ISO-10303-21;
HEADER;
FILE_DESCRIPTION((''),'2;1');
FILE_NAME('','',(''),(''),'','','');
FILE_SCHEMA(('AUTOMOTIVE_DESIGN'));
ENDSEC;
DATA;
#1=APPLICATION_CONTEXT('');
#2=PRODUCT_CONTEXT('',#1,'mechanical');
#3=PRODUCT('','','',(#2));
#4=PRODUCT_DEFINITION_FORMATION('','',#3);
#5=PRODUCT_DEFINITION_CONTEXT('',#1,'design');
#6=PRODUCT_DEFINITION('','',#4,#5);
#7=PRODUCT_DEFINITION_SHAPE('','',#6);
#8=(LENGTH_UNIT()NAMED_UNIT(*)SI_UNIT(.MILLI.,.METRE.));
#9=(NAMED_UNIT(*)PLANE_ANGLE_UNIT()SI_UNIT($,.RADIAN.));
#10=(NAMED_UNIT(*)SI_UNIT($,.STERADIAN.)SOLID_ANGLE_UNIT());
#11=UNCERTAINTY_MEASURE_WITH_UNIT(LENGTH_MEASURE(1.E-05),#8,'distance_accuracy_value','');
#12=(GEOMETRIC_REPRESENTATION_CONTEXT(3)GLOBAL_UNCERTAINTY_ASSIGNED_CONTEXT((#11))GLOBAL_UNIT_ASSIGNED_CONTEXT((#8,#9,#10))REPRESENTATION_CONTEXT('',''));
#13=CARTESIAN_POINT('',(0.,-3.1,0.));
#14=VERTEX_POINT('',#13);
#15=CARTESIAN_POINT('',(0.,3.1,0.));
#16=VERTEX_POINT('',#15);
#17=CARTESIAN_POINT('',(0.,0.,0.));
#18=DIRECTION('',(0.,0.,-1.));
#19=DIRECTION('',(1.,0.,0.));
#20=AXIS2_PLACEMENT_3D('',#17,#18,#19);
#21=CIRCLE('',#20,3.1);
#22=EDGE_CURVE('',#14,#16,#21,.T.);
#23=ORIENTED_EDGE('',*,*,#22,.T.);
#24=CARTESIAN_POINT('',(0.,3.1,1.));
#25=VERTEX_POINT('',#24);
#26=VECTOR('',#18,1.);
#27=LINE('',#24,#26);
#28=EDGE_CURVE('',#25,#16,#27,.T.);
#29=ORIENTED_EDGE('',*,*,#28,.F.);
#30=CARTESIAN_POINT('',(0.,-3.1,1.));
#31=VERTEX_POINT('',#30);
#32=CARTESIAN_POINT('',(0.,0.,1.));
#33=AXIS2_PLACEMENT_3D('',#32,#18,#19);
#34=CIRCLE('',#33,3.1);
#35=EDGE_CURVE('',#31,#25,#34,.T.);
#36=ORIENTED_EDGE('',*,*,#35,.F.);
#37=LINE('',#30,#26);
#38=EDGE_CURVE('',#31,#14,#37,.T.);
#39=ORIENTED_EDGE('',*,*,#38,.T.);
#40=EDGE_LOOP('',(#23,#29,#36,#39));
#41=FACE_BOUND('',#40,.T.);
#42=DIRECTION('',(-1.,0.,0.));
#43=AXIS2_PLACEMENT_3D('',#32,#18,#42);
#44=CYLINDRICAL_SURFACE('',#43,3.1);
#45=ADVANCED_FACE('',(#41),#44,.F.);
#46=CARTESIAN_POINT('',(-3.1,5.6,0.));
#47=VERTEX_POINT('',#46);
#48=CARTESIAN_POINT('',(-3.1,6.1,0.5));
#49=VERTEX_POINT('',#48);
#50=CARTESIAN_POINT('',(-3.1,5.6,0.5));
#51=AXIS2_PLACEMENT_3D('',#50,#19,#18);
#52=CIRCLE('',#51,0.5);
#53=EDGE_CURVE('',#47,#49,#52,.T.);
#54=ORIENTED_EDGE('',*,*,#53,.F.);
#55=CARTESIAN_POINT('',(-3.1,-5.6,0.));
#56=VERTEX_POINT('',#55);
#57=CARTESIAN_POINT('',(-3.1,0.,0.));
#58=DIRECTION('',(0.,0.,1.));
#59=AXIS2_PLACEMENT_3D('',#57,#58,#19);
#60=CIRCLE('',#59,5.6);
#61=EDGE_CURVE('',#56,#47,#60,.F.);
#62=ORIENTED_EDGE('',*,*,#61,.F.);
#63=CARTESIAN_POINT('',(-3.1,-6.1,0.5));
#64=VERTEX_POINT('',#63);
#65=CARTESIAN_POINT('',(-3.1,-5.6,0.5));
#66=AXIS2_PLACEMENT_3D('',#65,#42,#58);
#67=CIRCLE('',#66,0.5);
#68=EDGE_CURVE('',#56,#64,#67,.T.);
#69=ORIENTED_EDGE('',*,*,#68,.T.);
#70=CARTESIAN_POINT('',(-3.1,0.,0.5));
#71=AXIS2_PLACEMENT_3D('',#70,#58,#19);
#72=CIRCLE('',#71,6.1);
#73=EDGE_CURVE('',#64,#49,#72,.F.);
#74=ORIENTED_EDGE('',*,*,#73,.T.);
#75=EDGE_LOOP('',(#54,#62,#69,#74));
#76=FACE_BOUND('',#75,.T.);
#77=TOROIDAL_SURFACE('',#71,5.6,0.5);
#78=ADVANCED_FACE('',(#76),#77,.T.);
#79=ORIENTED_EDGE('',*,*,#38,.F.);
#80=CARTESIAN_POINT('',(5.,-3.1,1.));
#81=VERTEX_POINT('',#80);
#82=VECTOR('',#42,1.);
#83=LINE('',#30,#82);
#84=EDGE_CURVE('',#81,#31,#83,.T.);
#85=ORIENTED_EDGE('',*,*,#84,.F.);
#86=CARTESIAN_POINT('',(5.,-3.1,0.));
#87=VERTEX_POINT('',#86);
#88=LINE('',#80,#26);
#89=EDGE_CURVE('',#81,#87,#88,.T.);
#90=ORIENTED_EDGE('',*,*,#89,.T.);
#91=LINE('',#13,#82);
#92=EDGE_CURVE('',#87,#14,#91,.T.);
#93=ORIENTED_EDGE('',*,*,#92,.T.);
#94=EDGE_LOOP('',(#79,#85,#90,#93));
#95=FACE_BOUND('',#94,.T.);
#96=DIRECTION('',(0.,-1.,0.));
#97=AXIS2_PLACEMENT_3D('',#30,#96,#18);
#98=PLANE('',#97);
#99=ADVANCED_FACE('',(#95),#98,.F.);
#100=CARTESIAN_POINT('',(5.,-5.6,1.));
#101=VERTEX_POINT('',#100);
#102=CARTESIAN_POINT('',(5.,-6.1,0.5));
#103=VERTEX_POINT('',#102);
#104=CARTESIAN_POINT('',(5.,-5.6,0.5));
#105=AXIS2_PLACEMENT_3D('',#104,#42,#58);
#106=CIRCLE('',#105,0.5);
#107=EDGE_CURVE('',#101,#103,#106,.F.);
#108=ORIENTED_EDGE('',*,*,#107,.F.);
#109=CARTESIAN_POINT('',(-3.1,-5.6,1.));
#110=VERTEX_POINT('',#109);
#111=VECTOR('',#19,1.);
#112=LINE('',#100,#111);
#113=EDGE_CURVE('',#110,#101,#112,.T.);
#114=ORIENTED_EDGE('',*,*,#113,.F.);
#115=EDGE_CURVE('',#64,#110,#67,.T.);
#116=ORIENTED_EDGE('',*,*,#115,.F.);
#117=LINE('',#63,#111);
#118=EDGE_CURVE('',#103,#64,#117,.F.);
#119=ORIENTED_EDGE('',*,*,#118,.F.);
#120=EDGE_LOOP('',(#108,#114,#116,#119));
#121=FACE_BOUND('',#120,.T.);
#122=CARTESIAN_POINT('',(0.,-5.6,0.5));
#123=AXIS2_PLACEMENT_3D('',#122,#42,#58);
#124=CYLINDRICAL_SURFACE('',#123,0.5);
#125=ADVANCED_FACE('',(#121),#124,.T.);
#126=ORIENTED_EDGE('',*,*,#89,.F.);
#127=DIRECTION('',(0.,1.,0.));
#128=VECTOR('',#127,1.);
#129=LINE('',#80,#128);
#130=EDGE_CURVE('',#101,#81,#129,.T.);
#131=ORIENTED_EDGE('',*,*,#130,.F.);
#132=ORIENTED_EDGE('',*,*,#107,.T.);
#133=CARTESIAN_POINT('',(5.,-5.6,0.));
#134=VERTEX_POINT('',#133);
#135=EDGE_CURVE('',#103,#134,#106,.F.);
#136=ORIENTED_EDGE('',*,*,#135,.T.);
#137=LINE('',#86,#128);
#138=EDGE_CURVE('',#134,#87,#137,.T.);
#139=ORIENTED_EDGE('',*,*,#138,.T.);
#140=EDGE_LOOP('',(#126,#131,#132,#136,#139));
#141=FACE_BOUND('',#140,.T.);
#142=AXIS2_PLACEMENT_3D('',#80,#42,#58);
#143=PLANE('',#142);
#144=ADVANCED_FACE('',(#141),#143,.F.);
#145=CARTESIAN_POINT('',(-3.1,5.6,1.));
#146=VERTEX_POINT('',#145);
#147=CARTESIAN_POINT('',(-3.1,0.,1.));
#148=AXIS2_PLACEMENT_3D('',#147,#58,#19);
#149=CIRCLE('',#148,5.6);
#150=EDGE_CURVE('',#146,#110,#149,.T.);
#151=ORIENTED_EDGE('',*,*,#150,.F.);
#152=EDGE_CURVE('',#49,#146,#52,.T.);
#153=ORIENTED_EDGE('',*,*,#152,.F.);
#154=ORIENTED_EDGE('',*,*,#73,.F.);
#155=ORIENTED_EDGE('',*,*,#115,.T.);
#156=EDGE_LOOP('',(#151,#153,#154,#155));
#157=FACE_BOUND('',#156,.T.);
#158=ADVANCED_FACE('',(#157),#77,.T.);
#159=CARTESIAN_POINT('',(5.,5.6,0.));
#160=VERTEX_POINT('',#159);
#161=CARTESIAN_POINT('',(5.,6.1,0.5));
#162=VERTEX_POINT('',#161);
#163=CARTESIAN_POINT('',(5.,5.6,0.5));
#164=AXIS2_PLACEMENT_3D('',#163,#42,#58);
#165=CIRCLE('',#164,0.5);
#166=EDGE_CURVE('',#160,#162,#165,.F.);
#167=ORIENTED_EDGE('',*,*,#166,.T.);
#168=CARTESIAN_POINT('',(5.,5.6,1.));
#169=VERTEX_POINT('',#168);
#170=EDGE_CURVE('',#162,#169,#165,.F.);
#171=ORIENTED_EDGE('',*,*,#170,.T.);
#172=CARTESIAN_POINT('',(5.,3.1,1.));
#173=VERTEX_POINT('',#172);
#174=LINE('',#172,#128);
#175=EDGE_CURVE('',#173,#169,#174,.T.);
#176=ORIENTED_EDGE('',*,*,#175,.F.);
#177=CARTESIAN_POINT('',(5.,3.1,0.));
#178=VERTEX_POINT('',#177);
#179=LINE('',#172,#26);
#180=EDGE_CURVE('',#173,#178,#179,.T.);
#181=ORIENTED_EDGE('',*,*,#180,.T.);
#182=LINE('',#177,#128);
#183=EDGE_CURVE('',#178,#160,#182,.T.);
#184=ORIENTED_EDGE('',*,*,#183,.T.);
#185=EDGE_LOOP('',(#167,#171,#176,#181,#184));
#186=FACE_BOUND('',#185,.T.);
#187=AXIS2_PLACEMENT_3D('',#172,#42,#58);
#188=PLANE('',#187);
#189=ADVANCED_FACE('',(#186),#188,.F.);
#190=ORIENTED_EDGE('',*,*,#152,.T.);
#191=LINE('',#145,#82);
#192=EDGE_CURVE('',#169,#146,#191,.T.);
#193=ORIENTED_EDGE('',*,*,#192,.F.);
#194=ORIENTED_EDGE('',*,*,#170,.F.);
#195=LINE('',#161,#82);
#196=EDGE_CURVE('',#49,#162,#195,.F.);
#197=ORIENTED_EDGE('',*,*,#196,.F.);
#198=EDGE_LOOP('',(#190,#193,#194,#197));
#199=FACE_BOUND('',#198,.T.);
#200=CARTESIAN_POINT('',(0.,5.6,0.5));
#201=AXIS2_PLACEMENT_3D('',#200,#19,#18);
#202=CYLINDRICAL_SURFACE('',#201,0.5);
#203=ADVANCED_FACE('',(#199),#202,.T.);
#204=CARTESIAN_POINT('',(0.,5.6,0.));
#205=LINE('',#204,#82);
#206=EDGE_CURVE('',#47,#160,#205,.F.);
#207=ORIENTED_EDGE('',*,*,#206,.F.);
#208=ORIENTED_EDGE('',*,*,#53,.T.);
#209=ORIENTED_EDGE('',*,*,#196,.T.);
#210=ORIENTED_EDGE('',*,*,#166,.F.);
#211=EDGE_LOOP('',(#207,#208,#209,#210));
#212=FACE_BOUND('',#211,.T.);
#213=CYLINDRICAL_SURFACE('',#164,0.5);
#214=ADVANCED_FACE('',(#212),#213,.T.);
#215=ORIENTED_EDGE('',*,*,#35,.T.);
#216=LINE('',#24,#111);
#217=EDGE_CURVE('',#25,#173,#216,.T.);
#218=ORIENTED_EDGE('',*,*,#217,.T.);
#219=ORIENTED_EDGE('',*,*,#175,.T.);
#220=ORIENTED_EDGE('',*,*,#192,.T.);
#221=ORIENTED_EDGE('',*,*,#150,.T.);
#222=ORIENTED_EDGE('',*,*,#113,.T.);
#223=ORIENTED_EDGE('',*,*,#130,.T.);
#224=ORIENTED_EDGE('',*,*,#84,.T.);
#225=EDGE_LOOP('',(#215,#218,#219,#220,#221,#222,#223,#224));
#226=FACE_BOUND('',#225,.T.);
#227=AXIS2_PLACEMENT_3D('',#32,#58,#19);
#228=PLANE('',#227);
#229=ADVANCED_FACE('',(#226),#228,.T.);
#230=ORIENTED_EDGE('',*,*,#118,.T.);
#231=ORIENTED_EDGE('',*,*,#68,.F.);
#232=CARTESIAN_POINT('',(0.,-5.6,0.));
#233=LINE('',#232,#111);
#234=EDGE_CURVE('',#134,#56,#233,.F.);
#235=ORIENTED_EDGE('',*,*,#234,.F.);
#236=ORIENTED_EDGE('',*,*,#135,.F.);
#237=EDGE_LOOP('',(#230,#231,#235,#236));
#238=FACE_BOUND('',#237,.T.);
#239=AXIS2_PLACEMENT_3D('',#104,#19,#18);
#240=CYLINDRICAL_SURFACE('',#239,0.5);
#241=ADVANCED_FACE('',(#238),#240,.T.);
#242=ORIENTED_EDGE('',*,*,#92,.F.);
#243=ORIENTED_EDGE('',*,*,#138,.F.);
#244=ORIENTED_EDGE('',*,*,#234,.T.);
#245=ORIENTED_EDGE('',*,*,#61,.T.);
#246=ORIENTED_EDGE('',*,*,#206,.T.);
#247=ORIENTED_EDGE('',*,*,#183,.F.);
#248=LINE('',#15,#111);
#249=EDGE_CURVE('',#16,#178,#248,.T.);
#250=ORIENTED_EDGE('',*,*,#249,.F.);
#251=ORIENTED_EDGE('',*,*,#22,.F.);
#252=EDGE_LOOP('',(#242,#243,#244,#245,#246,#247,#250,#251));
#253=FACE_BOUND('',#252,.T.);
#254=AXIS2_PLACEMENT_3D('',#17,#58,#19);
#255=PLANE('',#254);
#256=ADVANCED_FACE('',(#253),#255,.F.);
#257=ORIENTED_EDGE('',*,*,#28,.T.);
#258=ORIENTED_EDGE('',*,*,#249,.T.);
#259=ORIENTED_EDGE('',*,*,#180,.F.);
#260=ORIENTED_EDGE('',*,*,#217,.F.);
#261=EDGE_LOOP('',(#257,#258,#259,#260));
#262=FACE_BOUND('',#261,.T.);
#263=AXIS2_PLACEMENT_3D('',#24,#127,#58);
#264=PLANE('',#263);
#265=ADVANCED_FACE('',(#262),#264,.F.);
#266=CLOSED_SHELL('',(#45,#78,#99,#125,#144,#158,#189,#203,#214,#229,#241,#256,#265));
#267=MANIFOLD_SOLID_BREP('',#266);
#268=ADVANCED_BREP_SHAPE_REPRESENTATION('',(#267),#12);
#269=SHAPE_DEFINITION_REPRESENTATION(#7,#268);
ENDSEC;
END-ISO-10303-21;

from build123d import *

# Parameters (mm, degrees)
BOSS_EXTRUDE1_DEPTH = 1
FILLET1_R           = 0.5


with BuildPart() as part:
    # Sketch1 → Boss-Extrude1 (new body)
    with BuildSketch(Plane.XY):
        with BuildLine():
            Line((0, 3.1), (5, 3.1))
            Line((5, 3.1), (5, 6.1))
            Line((5, 6.1), (-3.1, 6.1))
            ThreePointArc((-3.1, 6.1), (-9.2, 0), (-3.1, -6.1))
            Line((-3.1, -6.1), (5, -6.1))
            Line((5, -6.1), (5, -3.1))
            Line((5, -3.1), (0, -3.1))
            ThreePointArc((0, -3.1), (-3.1, 0), (0, 3.1))
        make_face()
    extrude(amount=BOSS_EXTRUDE1_DEPTH)

    # Fillet1
    fillet1_edges = [part.edges().sort_by_distance(p)[0] for p in [
        (0.95, 6.1, 0),
        (0.95, -6.1, 0),
        (0.95, 6.1, 1),
        (0.95, -6.1, 1),
        (-9.2, 0, 0),
        (-9.2, 0, 1),
    ]]
    fillet(fillet1_edges, radius=FILLET1_R - 0.0001)  # a hair under: the kernel refuses the full size


solid = part.part
